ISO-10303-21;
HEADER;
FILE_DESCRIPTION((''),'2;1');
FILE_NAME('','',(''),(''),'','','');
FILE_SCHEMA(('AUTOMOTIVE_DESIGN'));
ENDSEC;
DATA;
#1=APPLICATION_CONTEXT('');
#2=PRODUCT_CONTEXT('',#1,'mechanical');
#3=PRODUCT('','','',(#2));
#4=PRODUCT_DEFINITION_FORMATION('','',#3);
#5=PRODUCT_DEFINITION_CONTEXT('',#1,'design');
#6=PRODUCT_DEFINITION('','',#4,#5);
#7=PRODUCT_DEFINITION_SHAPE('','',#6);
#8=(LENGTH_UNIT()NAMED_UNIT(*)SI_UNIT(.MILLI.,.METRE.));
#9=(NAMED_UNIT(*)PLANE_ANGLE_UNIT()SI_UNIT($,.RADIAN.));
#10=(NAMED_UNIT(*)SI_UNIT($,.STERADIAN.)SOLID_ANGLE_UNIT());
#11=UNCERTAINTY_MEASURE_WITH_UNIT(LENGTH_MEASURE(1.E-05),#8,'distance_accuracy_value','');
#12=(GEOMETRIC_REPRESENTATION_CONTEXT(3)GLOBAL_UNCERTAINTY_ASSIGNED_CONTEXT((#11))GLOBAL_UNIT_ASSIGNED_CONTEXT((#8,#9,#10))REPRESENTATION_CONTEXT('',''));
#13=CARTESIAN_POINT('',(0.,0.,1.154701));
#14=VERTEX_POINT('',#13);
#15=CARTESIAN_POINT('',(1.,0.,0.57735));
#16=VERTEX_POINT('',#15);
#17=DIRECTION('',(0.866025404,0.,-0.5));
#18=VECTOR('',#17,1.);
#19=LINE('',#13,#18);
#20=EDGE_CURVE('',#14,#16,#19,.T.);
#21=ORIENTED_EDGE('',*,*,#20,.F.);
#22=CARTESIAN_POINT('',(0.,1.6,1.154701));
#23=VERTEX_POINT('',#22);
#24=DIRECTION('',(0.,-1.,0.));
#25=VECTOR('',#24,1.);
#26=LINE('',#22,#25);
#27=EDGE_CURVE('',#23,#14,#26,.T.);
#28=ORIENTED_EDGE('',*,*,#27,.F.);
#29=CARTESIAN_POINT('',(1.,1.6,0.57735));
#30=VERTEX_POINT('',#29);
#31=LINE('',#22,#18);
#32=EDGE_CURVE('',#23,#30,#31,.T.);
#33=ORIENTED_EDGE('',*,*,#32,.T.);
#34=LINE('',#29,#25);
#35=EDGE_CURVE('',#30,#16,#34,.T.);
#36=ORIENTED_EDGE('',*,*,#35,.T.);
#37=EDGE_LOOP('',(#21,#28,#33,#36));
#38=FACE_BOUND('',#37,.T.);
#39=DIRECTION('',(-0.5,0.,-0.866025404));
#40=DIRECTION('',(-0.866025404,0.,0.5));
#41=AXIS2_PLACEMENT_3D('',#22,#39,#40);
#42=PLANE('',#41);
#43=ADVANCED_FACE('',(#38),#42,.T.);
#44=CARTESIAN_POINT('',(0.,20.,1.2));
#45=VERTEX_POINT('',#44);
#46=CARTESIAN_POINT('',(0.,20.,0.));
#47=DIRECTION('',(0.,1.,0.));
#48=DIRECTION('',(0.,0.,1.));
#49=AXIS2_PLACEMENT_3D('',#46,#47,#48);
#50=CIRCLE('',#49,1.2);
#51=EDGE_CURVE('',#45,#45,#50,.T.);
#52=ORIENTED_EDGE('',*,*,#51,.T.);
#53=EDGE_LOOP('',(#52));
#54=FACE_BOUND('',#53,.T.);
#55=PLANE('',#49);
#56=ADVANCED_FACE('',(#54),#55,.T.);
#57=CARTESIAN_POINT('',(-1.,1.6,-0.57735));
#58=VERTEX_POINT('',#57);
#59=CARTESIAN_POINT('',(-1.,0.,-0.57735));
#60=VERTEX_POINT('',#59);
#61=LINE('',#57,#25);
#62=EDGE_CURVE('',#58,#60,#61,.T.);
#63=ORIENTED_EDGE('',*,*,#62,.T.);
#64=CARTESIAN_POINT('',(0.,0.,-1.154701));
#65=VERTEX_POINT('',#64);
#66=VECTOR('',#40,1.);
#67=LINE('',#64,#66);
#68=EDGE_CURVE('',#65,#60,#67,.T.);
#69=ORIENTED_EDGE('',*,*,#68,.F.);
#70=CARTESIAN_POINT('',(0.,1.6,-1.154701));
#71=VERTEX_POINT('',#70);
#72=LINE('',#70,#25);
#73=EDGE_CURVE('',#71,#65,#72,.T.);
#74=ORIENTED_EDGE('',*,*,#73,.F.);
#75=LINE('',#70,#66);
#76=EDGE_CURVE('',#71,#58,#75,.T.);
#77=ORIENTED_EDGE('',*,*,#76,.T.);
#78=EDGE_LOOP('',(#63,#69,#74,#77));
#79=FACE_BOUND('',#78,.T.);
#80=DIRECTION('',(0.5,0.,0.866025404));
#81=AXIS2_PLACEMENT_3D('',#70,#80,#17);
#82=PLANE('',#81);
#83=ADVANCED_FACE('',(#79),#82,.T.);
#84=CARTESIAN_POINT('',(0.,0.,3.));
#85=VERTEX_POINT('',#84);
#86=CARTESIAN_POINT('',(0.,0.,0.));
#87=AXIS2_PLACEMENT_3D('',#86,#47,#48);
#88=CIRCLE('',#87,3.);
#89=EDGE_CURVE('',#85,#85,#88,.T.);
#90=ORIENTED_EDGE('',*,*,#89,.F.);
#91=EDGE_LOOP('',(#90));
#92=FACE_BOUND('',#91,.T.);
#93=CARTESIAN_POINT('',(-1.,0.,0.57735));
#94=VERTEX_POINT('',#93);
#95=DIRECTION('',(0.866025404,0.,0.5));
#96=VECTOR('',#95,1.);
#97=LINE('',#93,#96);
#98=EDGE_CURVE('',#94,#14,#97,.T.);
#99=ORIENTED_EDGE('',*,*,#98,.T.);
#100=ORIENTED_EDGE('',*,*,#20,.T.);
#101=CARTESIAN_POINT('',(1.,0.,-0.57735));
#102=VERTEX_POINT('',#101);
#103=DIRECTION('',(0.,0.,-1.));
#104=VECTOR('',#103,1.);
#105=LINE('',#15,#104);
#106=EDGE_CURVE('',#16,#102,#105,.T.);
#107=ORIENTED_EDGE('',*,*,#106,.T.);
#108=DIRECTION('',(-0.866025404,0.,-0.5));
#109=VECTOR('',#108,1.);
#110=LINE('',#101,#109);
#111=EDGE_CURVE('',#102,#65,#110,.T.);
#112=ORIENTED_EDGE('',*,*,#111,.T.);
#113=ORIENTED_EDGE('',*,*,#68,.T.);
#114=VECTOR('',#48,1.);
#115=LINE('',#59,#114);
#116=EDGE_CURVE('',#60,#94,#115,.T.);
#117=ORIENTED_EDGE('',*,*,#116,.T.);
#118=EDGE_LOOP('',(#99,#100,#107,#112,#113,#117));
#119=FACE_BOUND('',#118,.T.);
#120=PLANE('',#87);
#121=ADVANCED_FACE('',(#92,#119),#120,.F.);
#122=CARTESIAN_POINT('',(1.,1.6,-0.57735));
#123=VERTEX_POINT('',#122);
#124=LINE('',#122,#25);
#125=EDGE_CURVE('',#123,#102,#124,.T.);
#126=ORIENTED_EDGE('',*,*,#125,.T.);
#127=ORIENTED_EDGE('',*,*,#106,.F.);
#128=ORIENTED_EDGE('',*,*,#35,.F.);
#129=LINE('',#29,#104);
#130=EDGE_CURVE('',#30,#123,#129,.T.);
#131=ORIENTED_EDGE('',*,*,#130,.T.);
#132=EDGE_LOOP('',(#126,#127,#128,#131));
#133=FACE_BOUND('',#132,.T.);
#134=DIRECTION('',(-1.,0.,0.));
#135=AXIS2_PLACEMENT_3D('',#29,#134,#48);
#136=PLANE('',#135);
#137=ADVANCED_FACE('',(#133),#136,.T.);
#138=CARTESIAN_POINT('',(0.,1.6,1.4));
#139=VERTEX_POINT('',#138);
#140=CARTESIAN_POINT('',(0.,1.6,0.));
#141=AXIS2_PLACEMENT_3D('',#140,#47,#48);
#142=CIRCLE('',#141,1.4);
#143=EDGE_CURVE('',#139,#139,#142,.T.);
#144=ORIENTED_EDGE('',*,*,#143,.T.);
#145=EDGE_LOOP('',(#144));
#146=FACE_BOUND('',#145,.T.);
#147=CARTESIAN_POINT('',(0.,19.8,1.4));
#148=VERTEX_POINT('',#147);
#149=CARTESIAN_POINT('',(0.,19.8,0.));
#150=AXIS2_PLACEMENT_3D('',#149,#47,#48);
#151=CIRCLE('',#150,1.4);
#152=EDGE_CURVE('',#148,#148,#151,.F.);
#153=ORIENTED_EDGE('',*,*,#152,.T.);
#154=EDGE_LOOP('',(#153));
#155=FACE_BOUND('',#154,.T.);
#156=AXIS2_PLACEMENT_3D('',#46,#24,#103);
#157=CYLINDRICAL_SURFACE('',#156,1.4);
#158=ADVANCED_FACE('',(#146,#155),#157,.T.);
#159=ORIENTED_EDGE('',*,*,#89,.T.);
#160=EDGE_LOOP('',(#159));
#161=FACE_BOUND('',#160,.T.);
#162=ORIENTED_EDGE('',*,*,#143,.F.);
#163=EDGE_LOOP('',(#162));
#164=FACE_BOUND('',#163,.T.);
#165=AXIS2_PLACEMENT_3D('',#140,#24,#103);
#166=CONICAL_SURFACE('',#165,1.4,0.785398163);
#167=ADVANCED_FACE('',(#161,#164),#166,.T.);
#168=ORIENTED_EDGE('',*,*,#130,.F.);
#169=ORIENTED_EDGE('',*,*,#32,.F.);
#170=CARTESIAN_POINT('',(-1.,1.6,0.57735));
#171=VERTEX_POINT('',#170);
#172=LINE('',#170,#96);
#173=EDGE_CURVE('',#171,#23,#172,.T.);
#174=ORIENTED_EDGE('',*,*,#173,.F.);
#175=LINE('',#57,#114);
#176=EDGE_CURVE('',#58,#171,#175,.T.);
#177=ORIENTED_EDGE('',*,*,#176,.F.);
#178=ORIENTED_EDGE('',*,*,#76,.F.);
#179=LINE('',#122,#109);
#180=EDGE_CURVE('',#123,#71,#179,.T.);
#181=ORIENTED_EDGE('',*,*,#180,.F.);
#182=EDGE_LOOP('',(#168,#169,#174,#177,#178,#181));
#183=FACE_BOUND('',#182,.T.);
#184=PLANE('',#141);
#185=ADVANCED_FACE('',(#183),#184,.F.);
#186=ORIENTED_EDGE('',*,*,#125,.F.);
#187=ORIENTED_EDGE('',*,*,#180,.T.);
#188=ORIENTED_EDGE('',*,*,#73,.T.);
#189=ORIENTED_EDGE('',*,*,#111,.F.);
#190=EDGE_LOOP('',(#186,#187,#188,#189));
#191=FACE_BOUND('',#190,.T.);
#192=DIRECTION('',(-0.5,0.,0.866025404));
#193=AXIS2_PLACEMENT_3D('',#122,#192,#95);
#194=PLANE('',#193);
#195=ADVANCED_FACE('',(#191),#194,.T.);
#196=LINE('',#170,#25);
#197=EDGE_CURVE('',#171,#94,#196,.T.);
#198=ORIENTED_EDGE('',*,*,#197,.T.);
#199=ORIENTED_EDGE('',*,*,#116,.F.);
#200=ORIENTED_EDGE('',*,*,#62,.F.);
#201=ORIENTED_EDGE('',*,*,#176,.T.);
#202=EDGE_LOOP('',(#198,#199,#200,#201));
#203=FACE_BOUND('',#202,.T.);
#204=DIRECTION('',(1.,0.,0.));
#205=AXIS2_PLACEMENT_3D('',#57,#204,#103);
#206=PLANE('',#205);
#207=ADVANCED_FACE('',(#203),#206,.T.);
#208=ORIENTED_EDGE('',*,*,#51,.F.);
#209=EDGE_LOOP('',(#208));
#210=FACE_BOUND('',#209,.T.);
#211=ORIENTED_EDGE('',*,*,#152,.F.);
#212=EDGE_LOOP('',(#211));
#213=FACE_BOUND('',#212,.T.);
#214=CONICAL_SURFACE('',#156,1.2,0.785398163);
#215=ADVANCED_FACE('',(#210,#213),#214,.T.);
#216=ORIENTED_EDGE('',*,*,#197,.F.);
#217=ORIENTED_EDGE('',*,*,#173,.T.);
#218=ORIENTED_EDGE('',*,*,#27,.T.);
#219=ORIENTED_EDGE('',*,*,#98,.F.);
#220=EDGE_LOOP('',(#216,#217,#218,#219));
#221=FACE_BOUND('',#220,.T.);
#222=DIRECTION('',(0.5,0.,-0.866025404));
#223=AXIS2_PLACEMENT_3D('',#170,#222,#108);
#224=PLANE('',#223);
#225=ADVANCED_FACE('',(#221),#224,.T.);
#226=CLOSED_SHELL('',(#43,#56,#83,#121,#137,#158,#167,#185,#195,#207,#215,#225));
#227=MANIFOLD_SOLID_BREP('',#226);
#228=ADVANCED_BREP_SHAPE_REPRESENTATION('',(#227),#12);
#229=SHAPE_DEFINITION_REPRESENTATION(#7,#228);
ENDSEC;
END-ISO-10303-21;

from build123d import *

# Parameters (mm, degrees)
SKETCH_1_R      = 3
EXTRUDE_1_DEPTH = 1.6
CHAMFER_1_SIZE  = 1.6
SKETCH_2_R      = 1.4
EXTRUDE_2_DEPTH = 18.4
CHAMFER_2_SIZE  = 0.2


with BuildPart() as part:
    # 草图1 → 凸台-拉伸1 (new body)
    with BuildSketch(Plane(origin=(0, 0, 0), x_dir=(1, 0, 0), z_dir=(0, 1, 0))):
        with Locations(Location((0, 0, 0), (0, 0, 270))):
            Circle(SKETCH_1_R)
        Polygon((0, -1.154700538), (1, -0.577350269), (1, 0.577350269), (0, 1.154700538), (-1, 0.577350269), (-1, -0.577350269), align=None, mode=Mode.SUBTRACT)
    extrude(amount=EXTRUDE_1_DEPTH)

    # 倒角1
    # the kernel refuses this chamfer: 1.6 mm, written as the material it takes off along each edge
    with BuildSketch(Plane(origin=(0, 1.6, 0), x_dir=(0, 0, 1), z_dir=(-1, 0, 0))) as chamfer_1_piece_1:
        Polygon((3, -CHAMFER_1_SIZE), (3 - CHAMFER_1_SIZE, 0), (3, 0), align=None)
    revolve(axis=Axis((0, 1.6, 0), (0, 1, 0)), mode=Mode.SUBTRACT)

    # 草图2 → 凸台-拉伸2 (add)
    with BuildSketch(Plane(origin=(0, 1.6, 0), x_dir=(1, 0, 0), z_dir=(0, 1, 0))):
        with Locations(Location((0, 0, 0), (0, 0, 270))):
            Circle(SKETCH_2_R)
    extrude(amount=EXTRUDE_2_DEPTH)

    # 倒角2
    chamfer_2_edges = [part.edges().sort_by_distance(p)[0] for p in [
        (0, 20, -1.4),
    ]]
    chamfer(chamfer_2_edges, length=CHAMFER_2_SIZE)


solid = part.part
